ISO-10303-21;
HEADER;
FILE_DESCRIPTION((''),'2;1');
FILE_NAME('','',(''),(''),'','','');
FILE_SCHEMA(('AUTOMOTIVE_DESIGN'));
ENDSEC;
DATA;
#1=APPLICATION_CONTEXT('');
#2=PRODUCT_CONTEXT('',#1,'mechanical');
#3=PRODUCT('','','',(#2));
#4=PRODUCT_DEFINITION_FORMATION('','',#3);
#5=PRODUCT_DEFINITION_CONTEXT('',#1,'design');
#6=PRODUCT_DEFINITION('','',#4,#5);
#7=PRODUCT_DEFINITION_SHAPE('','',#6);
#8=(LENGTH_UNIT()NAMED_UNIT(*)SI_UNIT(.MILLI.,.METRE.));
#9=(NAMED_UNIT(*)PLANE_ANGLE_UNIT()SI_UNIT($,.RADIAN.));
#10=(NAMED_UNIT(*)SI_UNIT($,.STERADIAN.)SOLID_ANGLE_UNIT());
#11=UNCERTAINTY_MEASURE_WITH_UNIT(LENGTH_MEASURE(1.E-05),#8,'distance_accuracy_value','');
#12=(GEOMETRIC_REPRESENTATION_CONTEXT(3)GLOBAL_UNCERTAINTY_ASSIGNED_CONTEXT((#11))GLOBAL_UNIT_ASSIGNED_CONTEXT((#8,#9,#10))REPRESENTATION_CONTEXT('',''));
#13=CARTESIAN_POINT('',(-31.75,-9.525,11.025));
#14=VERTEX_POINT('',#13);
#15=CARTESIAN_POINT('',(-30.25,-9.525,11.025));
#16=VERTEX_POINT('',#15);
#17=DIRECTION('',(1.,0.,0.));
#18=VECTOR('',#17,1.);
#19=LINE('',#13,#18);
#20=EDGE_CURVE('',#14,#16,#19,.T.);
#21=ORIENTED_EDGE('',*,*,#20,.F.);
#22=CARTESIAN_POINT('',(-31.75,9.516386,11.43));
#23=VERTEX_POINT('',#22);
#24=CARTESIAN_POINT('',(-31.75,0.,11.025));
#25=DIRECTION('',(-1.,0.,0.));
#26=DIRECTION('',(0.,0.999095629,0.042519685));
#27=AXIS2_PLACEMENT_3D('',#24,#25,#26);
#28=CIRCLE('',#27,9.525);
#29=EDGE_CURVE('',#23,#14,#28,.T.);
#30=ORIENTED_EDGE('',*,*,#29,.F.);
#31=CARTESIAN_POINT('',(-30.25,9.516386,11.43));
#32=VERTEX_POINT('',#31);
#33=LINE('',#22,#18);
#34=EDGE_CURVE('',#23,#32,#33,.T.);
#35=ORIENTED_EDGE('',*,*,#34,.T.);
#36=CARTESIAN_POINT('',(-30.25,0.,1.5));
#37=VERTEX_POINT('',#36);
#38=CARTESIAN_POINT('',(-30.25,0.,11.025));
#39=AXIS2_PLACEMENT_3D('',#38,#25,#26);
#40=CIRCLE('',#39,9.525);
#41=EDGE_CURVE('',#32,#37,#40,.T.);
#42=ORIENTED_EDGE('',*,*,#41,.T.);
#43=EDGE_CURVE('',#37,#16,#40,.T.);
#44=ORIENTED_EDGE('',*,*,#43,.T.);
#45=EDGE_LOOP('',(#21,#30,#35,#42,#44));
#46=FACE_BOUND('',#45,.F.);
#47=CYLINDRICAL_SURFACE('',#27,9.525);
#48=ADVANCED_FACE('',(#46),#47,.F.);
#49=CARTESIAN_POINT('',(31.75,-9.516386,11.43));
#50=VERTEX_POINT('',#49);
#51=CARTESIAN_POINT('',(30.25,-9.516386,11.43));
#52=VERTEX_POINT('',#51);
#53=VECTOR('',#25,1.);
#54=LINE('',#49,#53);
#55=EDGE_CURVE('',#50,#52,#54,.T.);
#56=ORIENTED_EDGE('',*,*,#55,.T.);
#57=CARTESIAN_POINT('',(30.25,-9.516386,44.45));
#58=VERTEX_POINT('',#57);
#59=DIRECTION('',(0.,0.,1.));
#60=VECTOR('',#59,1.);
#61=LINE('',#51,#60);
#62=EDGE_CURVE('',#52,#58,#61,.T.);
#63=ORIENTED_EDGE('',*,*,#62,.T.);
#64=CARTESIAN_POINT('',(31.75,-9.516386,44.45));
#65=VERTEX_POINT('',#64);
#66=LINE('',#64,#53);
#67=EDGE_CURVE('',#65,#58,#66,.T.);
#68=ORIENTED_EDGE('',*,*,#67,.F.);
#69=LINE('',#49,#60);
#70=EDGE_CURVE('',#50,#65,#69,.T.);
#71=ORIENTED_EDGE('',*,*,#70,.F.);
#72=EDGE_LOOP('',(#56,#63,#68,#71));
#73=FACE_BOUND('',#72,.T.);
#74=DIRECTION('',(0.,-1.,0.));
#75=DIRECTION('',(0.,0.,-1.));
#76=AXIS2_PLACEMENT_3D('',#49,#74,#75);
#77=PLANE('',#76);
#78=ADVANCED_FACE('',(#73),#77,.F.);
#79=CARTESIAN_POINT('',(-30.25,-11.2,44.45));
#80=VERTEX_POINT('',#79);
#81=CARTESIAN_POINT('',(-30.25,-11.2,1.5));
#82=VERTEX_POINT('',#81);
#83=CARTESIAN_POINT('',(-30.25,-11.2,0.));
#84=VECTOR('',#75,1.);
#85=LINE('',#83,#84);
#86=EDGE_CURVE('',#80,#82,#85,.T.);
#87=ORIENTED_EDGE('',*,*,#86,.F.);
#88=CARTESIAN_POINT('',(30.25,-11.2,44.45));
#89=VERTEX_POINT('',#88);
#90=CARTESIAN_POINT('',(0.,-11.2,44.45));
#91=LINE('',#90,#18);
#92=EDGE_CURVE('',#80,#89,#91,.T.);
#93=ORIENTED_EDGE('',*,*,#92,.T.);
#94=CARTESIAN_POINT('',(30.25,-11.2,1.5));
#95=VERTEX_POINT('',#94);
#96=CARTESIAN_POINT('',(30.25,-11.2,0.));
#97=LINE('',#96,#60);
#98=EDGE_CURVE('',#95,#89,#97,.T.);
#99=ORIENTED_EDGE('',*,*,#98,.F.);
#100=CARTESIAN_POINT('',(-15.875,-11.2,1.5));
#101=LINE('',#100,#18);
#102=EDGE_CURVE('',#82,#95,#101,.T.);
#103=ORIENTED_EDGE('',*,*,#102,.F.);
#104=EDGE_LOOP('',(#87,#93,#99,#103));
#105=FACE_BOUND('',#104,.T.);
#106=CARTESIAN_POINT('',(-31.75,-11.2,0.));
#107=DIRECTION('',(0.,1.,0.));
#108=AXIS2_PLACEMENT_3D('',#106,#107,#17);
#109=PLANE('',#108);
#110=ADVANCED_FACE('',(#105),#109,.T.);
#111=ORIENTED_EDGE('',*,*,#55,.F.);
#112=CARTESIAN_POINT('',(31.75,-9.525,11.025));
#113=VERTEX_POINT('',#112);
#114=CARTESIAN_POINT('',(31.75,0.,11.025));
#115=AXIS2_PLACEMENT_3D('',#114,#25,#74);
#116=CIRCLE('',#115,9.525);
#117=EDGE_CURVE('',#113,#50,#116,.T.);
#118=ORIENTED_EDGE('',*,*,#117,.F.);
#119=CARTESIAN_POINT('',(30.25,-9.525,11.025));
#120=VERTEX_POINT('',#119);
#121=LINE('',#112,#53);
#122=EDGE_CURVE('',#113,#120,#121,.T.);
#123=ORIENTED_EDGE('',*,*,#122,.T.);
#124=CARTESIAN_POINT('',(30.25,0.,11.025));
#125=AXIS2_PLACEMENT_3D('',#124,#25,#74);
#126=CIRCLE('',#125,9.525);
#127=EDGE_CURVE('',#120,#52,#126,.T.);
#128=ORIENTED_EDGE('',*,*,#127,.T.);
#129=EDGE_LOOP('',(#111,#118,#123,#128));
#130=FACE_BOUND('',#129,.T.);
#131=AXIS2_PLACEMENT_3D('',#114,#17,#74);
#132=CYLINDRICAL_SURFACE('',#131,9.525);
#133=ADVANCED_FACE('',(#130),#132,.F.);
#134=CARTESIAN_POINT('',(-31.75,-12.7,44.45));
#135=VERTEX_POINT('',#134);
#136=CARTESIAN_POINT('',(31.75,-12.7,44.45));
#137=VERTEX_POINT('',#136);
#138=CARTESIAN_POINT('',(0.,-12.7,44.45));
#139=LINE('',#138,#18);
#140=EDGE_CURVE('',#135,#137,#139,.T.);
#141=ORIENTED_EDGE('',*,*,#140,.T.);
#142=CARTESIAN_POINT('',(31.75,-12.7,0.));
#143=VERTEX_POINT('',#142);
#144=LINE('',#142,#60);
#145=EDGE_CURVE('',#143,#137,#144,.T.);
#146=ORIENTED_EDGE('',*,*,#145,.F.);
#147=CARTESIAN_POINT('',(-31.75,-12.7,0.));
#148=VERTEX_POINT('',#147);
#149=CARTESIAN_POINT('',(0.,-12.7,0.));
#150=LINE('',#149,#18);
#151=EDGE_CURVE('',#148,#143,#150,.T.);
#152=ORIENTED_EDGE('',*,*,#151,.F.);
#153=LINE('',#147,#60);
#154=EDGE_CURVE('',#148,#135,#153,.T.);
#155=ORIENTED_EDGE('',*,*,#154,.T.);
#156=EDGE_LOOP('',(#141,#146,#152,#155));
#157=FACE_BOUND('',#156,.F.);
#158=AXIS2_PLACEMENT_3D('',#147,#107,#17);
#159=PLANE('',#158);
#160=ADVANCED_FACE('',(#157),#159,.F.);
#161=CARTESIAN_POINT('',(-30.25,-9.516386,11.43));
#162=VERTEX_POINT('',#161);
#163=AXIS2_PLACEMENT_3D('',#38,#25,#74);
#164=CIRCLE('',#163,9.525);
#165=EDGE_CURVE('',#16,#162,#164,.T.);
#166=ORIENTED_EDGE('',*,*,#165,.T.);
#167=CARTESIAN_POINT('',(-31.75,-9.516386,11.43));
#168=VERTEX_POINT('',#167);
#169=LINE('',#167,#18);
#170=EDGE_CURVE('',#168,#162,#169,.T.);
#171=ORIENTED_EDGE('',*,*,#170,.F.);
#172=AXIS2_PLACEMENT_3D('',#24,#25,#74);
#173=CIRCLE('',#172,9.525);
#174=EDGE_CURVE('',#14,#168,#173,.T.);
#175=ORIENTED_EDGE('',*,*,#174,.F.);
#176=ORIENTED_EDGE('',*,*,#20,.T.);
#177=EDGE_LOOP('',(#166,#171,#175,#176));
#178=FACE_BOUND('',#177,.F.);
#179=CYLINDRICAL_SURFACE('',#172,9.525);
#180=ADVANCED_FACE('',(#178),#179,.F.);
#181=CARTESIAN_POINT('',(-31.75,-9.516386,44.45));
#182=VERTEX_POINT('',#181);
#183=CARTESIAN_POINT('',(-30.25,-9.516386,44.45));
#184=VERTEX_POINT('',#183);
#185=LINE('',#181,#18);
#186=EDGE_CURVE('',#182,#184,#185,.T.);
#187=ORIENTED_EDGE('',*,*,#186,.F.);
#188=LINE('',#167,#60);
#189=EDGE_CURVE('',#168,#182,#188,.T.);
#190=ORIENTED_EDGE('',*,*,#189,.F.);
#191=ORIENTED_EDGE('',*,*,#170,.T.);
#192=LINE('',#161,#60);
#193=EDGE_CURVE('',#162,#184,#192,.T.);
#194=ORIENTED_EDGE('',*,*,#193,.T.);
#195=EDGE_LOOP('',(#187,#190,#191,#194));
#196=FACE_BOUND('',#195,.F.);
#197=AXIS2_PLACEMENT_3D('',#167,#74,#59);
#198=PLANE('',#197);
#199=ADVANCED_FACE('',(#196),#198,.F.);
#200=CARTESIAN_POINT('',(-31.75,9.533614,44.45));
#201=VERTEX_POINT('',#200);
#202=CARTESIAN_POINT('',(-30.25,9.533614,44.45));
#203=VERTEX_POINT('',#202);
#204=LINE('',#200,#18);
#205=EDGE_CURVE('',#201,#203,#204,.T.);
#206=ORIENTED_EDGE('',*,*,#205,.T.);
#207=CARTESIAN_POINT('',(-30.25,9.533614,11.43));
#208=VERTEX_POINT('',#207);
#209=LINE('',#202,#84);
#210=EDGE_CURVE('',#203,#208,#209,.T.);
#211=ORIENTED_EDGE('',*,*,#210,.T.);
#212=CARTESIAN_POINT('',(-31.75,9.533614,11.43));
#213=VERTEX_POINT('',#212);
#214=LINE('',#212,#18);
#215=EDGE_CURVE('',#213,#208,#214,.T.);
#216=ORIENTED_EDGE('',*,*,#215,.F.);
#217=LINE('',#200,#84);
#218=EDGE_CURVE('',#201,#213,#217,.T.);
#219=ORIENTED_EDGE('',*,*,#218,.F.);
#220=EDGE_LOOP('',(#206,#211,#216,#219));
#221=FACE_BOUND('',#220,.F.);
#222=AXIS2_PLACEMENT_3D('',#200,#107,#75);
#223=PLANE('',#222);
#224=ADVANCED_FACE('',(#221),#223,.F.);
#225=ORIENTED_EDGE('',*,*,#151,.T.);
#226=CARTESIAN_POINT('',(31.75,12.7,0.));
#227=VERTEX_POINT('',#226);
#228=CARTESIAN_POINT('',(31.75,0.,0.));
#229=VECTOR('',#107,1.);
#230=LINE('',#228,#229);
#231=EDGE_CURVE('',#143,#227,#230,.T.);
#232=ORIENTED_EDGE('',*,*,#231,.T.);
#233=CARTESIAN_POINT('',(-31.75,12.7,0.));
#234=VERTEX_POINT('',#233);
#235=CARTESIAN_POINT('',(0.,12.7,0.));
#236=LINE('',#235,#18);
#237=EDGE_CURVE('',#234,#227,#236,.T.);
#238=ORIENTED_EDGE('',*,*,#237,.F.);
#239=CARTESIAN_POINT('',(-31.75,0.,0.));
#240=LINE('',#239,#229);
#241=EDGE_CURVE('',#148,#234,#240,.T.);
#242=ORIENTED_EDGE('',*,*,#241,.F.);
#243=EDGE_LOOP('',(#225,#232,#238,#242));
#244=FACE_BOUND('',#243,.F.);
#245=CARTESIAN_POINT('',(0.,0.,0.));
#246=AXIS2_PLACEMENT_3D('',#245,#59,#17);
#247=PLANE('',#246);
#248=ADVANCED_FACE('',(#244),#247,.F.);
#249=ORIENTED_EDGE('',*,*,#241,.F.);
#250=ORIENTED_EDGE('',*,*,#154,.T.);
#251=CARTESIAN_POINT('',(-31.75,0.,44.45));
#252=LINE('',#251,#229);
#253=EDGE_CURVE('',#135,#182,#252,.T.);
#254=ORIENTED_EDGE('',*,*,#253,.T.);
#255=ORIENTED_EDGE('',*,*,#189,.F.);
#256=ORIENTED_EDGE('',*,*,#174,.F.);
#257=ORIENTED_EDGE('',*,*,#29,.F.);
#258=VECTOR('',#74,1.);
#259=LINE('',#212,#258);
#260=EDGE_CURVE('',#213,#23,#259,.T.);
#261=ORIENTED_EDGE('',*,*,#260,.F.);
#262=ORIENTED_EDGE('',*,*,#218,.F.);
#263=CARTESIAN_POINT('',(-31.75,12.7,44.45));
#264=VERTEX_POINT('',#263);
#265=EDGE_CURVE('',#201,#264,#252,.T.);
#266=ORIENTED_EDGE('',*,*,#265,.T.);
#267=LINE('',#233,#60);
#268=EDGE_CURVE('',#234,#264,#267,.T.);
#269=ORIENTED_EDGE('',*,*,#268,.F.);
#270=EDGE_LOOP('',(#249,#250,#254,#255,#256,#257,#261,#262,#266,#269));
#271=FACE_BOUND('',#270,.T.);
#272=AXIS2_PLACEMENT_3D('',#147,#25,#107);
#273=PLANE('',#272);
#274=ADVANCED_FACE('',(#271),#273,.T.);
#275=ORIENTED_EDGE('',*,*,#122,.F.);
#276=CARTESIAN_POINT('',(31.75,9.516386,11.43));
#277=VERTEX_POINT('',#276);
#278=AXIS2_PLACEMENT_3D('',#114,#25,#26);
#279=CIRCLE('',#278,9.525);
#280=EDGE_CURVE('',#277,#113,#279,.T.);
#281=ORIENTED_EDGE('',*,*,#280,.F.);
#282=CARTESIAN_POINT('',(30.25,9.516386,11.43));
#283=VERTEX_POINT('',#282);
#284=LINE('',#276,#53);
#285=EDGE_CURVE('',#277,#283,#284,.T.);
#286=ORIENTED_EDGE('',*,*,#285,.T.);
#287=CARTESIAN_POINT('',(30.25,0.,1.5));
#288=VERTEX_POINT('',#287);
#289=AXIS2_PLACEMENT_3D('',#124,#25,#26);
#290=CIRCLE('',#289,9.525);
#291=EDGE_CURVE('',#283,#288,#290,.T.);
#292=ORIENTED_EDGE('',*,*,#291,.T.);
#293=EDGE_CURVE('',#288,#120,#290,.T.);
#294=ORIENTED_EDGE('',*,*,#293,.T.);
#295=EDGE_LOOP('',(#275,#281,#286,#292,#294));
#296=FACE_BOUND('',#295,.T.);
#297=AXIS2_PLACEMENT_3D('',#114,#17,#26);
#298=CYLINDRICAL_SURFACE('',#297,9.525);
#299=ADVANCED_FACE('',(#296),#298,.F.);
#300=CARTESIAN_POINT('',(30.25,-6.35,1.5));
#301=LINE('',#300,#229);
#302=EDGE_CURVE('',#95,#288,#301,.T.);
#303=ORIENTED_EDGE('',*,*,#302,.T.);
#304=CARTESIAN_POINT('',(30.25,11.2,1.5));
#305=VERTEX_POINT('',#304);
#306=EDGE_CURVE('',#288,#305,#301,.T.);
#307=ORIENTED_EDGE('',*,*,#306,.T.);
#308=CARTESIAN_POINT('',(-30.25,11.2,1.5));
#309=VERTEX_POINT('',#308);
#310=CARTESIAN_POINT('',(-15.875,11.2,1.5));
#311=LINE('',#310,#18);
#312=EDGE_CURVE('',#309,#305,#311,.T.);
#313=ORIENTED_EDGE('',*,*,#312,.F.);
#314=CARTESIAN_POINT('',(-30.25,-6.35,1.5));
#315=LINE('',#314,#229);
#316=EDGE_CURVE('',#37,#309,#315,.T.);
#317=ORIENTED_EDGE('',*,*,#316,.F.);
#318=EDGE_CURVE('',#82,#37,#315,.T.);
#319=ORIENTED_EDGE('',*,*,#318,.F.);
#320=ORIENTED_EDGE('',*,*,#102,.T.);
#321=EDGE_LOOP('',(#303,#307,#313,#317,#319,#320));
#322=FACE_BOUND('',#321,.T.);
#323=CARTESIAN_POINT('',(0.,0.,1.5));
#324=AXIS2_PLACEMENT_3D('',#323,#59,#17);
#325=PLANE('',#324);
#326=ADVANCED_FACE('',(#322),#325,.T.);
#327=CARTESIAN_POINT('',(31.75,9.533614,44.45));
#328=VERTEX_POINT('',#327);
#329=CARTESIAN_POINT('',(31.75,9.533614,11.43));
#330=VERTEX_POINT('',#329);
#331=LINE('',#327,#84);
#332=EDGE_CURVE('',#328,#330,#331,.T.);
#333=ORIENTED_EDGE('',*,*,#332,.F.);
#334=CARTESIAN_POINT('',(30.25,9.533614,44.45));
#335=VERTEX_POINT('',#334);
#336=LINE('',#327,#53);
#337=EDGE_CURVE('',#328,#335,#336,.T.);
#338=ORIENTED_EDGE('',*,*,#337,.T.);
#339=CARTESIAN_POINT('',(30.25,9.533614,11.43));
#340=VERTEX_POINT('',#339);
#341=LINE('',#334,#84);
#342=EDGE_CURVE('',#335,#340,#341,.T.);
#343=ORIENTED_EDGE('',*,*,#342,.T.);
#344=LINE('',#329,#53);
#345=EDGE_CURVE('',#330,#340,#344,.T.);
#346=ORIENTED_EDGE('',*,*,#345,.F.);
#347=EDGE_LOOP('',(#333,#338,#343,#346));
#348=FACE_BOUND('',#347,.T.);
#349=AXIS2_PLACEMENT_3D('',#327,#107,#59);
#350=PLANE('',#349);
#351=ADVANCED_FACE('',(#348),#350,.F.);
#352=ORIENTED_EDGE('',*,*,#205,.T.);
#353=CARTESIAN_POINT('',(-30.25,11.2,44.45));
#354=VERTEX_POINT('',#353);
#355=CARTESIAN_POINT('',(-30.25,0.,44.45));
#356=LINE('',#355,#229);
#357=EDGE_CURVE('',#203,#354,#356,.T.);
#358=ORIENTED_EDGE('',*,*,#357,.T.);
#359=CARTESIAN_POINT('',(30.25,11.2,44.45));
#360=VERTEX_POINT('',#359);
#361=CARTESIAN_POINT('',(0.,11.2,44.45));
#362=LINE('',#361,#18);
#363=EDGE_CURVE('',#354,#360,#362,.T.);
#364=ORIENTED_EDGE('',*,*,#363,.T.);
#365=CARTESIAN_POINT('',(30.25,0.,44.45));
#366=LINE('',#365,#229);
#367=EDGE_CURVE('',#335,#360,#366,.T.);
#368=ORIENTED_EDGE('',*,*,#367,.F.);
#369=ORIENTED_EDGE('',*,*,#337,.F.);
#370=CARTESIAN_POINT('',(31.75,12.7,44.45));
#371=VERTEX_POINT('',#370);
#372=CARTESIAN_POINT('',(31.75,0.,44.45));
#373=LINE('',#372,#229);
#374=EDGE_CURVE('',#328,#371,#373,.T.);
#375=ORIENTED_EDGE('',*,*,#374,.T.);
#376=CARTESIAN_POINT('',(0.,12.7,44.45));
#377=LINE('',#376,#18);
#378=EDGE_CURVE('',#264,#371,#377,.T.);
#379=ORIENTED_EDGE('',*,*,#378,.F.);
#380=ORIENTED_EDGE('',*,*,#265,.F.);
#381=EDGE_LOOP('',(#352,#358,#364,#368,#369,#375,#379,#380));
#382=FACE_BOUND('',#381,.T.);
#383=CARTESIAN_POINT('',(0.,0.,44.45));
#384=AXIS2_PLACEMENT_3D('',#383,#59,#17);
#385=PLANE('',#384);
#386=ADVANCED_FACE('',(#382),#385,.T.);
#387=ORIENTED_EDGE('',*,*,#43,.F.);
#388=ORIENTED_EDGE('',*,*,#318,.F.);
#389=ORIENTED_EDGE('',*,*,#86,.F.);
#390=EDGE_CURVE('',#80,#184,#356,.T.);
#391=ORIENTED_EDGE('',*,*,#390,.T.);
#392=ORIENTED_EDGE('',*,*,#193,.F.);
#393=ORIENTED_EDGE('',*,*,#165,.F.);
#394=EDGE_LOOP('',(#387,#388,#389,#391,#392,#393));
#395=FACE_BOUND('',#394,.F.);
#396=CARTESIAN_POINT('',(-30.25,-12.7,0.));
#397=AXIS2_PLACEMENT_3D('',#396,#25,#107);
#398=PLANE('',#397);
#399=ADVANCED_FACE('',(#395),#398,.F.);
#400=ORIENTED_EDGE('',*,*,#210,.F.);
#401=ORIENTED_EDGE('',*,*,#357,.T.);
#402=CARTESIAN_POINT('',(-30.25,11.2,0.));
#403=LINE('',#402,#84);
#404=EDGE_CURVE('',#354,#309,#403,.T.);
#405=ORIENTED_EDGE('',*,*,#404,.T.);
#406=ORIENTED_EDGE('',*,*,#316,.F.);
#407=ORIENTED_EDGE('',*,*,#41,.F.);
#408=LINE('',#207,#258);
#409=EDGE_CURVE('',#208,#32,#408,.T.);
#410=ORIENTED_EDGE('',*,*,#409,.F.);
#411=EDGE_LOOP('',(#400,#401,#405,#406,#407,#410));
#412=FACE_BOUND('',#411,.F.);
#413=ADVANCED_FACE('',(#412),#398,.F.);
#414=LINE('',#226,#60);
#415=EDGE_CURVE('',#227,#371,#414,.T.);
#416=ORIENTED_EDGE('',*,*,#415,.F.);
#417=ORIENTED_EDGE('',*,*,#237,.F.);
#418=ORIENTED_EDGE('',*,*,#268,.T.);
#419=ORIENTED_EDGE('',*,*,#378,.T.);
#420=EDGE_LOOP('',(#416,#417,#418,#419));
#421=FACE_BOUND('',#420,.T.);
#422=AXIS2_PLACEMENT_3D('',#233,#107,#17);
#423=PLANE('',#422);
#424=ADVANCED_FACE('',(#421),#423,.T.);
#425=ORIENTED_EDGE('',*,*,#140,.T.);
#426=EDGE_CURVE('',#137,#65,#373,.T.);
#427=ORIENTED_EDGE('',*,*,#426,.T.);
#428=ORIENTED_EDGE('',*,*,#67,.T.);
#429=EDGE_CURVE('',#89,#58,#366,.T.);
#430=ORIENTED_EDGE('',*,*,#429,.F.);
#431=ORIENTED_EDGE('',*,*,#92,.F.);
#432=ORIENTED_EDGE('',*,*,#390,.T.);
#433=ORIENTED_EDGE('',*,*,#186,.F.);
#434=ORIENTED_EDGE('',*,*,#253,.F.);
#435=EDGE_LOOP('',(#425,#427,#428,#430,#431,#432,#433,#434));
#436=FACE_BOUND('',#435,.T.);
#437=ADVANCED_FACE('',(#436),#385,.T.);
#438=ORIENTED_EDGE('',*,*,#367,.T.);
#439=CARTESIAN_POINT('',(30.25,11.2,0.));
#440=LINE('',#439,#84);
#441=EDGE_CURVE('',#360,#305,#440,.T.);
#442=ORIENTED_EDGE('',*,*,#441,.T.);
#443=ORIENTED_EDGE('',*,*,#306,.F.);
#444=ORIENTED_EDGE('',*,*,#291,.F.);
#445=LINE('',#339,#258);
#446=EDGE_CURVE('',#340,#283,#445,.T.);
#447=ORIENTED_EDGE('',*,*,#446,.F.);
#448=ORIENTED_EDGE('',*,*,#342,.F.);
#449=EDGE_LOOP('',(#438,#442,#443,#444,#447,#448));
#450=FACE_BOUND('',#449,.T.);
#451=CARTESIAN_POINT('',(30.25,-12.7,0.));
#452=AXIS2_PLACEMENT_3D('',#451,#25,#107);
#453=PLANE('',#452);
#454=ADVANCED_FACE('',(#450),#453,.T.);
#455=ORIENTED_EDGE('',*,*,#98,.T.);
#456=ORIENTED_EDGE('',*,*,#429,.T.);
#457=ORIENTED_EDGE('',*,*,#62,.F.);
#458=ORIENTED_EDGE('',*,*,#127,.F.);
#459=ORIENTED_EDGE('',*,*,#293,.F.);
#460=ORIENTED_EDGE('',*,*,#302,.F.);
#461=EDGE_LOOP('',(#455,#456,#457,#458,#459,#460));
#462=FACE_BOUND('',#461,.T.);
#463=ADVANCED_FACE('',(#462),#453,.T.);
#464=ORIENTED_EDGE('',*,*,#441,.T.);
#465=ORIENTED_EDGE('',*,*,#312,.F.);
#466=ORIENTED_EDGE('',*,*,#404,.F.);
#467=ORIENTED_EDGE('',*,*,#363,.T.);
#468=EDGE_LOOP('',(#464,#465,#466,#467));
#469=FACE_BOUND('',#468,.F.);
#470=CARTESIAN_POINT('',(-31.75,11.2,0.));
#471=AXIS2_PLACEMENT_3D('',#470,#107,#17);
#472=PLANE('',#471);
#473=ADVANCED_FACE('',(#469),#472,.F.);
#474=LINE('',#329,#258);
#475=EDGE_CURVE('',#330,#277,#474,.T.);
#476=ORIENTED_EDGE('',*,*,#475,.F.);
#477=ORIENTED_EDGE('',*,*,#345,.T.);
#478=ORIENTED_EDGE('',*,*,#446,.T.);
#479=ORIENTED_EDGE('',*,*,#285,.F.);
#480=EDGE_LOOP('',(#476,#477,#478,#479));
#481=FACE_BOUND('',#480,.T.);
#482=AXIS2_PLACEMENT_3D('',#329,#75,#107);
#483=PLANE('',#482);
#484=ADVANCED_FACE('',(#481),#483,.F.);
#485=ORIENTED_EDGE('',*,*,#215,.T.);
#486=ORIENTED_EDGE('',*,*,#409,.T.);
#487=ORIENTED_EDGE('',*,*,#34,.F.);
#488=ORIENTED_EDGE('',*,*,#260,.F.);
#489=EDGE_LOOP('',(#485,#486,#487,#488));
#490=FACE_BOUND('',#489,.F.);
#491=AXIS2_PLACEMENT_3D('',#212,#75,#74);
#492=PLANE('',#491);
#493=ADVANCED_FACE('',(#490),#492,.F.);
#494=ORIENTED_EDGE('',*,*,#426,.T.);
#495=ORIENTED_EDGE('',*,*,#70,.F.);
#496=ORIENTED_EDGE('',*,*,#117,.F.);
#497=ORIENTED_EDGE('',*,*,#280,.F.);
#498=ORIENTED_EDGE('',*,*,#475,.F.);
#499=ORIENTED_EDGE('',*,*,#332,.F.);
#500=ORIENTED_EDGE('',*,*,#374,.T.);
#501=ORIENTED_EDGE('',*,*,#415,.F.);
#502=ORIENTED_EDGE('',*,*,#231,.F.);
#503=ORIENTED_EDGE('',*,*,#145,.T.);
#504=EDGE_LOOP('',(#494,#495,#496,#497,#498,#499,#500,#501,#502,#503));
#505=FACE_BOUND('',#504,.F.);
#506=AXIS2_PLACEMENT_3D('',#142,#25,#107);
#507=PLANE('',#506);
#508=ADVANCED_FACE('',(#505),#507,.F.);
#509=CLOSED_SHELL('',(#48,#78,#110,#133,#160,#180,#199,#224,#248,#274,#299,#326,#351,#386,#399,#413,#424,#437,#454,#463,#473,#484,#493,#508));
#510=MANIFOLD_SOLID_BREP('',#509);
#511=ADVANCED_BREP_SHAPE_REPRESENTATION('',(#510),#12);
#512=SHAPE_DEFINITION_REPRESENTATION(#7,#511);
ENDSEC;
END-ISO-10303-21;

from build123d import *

# Parameters (mm, degrees)
F0_W     = 63.5
F0_H     = 25.4
F1_DEPTH = 44.45
F2_T     = -1.5
F4_DEPTH = 1.5


# Not quite as in the source:
# - a pattern or mirror of a feature is missing from the dataset's text; its kind, count and spacing are read off the source's solid


with BuildPart() as f1:
    # F0 (on Top) → F1 (new body)
    with BuildSketch(Plane.XY):
        Rectangle(F0_W, F0_H)
    extrude(amount=F1_DEPTH)

    # F2
    f2_openings = [f1.faces().sort_by_distance(p)[0] for p in [
        (0, 0, 44.45),
    ]]
    offset(amount=F2_T, openings=f2_openings)

    # F3 (on face) → F4 (cut)
    with BuildSketch(Plane(origin=(-31.75, 0, 0), x_dir=(0, -1, 0), z_dir=(-1, 0, 0))):
        with BuildLine():
            Line((-9.5163858686, 11.43), (9.5163858686, 11.43))
            ThreePointArc((9.5163858686, 11.43), (0, 20.55), (-9.5163858686, 11.43))
        make_face()
        with BuildLine():
            ThreePointArc((-9.5163858686, 11.43), (-0.2025457993, 1.5021537764), (9.525, 11.025))
            ThreePointArc((9.525, 11.025), (9.5228462236, 11.2275457993), (9.5163858686, 11.43))
            Line((9.5163858686, 11.43), (-9.5163858686, 11.43))
        make_face()
        with BuildLine():
            ThreePointArc((-9.5163858686, 11.43), (0, 20.55), (9.5163858686, 11.43))
            Line((9.5163858686, 11.43), (9.5163858686, 44.45))
            Line((9.5163858686, 44.45), (-9.5336141314, 44.45))
            Line((-9.5336141314, 44.45), (-9.5336141314, 11.43))
            Line((-9.5336141314, 11.43), (-9.5163858686, 11.43))
        make_face()
    f4 = extrude(amount=-F4_DEPTH, mode=Mode.SUBTRACT)

    # F4_copies: F4 across plane
    add(f4.mirror(Plane(origin=(0, 0, 0), x_dir=(0, 0, 1), z_dir=(1, 0, 0))), mode=Mode.SUBTRACT)


solid = f1.part
